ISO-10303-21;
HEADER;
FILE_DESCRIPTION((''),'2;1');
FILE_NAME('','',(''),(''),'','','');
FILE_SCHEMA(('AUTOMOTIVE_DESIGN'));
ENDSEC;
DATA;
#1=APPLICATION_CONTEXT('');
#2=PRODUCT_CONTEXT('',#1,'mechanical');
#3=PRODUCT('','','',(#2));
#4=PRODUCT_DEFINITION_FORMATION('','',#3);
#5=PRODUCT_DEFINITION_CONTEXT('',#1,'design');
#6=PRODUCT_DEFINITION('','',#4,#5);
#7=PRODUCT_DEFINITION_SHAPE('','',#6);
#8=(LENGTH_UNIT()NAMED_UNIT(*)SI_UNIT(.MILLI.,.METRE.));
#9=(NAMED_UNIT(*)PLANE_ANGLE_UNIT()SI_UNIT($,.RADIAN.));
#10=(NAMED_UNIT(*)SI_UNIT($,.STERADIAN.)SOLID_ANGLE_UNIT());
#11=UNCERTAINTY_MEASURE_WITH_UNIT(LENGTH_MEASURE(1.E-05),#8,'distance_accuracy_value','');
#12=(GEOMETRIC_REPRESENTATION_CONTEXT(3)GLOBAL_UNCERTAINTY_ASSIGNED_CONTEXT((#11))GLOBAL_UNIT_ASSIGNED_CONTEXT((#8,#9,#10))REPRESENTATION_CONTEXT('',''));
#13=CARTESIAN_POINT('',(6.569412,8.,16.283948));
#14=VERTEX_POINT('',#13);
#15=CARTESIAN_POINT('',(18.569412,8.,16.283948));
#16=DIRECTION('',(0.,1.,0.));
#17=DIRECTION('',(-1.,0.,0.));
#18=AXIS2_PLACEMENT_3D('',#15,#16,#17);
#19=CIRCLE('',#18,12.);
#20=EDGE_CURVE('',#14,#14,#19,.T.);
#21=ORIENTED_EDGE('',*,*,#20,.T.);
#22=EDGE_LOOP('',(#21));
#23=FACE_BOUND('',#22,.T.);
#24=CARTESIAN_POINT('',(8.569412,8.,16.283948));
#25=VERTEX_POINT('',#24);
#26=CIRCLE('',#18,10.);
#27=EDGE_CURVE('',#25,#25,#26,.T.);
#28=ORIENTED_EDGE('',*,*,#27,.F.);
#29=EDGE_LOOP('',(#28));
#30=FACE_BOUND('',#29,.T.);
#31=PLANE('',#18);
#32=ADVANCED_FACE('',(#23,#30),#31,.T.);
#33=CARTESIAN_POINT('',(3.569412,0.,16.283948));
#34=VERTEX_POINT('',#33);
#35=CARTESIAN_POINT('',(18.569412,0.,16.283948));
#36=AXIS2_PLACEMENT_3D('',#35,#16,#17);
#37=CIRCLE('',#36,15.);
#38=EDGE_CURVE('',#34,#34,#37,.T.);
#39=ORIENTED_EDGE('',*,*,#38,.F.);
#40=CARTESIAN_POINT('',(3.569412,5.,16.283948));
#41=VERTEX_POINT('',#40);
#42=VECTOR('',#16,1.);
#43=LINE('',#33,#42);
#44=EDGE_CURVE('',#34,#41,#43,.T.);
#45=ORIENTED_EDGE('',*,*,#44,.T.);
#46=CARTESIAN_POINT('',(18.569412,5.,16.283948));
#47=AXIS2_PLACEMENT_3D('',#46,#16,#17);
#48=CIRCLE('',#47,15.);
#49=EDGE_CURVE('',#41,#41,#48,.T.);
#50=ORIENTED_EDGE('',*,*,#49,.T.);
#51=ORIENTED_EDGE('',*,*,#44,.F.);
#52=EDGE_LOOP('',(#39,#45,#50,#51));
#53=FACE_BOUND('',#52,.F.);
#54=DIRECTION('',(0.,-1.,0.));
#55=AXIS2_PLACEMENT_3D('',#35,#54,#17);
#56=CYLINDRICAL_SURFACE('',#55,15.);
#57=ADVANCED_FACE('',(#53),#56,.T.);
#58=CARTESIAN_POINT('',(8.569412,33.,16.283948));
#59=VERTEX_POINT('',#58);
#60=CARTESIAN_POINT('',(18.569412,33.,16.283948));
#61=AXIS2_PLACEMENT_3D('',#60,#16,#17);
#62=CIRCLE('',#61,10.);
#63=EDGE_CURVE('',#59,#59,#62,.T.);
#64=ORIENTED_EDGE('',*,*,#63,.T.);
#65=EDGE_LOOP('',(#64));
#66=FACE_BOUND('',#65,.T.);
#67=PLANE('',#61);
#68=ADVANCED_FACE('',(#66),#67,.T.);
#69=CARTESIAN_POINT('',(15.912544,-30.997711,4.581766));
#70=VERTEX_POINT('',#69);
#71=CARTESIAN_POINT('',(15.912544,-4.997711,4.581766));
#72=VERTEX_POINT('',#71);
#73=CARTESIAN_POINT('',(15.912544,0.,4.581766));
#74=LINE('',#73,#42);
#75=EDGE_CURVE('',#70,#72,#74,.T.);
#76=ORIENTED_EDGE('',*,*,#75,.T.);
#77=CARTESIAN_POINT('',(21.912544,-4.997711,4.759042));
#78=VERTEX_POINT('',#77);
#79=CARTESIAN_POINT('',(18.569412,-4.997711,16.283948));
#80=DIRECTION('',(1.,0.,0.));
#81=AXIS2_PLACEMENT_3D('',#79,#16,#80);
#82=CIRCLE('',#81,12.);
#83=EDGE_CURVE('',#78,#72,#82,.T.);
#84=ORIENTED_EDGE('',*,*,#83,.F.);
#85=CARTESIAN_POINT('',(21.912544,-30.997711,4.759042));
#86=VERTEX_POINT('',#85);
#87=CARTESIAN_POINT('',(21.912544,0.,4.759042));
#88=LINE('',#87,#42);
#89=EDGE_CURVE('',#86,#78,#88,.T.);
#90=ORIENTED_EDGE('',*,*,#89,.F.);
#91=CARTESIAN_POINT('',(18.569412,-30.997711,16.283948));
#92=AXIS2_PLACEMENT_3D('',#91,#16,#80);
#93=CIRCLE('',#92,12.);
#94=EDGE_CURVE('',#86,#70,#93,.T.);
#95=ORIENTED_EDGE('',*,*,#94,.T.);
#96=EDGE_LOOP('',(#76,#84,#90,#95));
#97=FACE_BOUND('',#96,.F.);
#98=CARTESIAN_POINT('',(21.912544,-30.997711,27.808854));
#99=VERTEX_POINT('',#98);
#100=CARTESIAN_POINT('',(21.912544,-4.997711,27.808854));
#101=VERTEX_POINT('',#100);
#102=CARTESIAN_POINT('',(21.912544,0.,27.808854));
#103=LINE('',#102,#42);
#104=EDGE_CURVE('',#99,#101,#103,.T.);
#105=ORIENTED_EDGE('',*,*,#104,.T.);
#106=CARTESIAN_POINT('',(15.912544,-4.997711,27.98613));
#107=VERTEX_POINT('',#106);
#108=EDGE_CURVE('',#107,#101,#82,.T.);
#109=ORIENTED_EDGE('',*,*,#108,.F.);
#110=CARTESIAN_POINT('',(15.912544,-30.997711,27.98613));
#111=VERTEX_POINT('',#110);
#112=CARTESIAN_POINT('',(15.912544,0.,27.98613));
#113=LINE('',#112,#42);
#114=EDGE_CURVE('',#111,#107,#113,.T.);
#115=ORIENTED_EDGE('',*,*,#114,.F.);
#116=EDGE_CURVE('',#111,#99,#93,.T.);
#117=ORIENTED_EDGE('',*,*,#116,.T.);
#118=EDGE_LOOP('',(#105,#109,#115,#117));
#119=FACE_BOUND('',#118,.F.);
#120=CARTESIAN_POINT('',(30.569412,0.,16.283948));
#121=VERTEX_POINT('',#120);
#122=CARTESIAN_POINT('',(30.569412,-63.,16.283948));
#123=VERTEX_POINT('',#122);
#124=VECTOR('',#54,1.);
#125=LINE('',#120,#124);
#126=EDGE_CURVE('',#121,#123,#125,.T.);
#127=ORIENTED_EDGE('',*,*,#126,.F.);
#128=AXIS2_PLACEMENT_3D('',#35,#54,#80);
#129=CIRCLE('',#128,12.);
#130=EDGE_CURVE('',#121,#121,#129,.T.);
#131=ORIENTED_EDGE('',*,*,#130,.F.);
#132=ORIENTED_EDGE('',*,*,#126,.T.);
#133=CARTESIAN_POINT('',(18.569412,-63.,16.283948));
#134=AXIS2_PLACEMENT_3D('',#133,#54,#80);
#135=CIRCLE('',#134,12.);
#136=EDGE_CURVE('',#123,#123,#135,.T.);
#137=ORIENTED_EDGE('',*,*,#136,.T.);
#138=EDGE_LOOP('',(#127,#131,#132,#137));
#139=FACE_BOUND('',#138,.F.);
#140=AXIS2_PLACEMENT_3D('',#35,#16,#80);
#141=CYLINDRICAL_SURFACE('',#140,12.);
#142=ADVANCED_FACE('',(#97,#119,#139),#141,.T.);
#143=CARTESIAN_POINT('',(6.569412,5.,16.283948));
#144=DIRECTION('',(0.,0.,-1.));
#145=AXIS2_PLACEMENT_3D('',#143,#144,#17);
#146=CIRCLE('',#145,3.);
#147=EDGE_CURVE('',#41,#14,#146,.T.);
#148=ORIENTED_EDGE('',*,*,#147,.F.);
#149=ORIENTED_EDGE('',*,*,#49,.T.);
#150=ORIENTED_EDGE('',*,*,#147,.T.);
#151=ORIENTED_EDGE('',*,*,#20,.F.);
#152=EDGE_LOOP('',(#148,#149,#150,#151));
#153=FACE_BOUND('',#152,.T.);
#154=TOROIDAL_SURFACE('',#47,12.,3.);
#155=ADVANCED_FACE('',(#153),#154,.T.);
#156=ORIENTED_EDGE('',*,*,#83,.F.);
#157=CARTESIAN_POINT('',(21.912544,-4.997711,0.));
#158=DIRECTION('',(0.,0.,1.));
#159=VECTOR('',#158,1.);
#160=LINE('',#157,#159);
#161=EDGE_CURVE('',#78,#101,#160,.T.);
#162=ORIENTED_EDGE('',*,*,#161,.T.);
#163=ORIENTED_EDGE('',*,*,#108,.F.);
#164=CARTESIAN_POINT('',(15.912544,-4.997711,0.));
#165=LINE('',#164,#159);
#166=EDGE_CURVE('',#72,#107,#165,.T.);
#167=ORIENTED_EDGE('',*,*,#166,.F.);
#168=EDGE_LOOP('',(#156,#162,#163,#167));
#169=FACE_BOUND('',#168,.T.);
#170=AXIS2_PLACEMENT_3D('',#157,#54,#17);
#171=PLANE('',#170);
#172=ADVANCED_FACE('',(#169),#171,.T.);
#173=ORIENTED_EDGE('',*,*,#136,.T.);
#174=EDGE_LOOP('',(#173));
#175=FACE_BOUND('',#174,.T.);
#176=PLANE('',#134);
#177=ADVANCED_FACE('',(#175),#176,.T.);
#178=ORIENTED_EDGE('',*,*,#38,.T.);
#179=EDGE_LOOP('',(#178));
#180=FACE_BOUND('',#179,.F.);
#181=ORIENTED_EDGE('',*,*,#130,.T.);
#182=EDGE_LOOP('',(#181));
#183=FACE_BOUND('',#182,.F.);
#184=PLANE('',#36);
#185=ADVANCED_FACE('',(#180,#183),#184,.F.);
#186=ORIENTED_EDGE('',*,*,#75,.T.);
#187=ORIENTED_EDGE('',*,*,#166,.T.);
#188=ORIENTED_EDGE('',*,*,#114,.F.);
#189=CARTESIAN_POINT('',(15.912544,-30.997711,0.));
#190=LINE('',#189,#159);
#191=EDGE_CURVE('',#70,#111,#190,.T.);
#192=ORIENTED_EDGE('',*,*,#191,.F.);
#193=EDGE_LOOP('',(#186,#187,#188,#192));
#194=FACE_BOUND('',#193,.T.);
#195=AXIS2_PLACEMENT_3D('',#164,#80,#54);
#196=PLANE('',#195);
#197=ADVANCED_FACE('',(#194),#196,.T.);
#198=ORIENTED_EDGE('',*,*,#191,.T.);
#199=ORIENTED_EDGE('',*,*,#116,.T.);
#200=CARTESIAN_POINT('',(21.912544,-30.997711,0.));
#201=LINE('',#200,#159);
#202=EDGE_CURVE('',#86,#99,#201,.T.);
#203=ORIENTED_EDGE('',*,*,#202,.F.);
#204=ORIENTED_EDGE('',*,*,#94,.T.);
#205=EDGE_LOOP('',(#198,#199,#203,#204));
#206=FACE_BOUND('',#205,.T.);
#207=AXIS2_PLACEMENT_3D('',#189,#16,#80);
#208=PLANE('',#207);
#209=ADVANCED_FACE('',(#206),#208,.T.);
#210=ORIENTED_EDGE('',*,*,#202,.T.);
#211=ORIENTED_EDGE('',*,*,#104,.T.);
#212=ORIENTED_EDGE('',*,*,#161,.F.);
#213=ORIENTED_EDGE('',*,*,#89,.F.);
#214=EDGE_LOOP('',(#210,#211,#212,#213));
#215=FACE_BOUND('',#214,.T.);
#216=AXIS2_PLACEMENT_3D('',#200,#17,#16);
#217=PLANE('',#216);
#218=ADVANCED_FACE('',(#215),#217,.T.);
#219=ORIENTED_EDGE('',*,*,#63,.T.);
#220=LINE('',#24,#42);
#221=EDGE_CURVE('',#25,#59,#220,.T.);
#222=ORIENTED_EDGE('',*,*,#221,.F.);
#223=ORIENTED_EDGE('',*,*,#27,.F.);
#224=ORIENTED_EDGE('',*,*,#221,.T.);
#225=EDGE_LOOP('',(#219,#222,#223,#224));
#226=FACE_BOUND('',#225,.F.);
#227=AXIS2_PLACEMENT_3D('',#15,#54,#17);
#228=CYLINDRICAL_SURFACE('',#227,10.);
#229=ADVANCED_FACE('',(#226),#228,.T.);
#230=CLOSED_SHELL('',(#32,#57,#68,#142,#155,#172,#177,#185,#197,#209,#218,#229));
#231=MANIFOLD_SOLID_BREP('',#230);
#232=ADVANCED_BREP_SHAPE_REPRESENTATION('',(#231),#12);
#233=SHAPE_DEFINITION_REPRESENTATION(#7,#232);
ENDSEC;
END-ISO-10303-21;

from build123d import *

# Parameters (mm, degrees)
F0_R     = 12
F1_DEPTH = 63
F2_R     = 15
F2_R_2   = 12
F3_DEPTH = 8
F4_R     = 10
F5_DEPTH = 25
F6_R     = 3
F8_DEPTH = 31.2849479744


with BuildPart() as f1:
    # F0 (on Front) → F1 (new body)
    with BuildSketch(Plane.XZ):
        with Locations((18.5694117099, 16.2839479744)):
            Circle(F0_R)
    extrude(amount=F1_DEPTH)

    # F2 (on face) → F3 (join)
    with BuildSketch(Plane(origin=(0, 0, 0), x_dir=(-1, 0, 0), z_dir=(0, 1, 0))):
        with Locations((-18.5694117099, 16.2839479744)):
            Circle(F2_R)
        with Locations((-18.5694117099, 16.2839479744)):
            Circle(F2_R_2, mode=Mode.SUBTRACT)
        with Locations((-18.5694117099, 16.2839479744)):
            Circle(F2_R_2)
    extrude(amount=F3_DEPTH)

    # F4 (on face) → F5 (join)
    with BuildSketch(Plane(origin=(0, 8, 0), x_dir=(-1, 0, 0), z_dir=(0, 1, 0))):
        with Locations((-18.5694117099, 16.2839479744)):
            Circle(F4_R)
    extrude(amount=F5_DEPTH)

    # F6
    f6_edges = [f1.edges().sort_by_distance(p)[0] for p in [
        (33.569412, 8, 16.283948),
    ]]
    fillet(f6_edges, radius=F6_R)

    # F7 (on Top) → F8 (cut, through all)
    with BuildSketch(Plane.XY):
        Polygon((21.912544474, -4.9977113605), (18.912544474, -4.9977113605), (15.912544474, -4.9977113605), (15.912544474, -30.9977113605), (18.912544474, -30.9977113605), (21.912544474, -30.9977113605), align=None)
    extrude(amount=F8_DEPTH, mode=Mode.SUBTRACT)


solid = f1.part
